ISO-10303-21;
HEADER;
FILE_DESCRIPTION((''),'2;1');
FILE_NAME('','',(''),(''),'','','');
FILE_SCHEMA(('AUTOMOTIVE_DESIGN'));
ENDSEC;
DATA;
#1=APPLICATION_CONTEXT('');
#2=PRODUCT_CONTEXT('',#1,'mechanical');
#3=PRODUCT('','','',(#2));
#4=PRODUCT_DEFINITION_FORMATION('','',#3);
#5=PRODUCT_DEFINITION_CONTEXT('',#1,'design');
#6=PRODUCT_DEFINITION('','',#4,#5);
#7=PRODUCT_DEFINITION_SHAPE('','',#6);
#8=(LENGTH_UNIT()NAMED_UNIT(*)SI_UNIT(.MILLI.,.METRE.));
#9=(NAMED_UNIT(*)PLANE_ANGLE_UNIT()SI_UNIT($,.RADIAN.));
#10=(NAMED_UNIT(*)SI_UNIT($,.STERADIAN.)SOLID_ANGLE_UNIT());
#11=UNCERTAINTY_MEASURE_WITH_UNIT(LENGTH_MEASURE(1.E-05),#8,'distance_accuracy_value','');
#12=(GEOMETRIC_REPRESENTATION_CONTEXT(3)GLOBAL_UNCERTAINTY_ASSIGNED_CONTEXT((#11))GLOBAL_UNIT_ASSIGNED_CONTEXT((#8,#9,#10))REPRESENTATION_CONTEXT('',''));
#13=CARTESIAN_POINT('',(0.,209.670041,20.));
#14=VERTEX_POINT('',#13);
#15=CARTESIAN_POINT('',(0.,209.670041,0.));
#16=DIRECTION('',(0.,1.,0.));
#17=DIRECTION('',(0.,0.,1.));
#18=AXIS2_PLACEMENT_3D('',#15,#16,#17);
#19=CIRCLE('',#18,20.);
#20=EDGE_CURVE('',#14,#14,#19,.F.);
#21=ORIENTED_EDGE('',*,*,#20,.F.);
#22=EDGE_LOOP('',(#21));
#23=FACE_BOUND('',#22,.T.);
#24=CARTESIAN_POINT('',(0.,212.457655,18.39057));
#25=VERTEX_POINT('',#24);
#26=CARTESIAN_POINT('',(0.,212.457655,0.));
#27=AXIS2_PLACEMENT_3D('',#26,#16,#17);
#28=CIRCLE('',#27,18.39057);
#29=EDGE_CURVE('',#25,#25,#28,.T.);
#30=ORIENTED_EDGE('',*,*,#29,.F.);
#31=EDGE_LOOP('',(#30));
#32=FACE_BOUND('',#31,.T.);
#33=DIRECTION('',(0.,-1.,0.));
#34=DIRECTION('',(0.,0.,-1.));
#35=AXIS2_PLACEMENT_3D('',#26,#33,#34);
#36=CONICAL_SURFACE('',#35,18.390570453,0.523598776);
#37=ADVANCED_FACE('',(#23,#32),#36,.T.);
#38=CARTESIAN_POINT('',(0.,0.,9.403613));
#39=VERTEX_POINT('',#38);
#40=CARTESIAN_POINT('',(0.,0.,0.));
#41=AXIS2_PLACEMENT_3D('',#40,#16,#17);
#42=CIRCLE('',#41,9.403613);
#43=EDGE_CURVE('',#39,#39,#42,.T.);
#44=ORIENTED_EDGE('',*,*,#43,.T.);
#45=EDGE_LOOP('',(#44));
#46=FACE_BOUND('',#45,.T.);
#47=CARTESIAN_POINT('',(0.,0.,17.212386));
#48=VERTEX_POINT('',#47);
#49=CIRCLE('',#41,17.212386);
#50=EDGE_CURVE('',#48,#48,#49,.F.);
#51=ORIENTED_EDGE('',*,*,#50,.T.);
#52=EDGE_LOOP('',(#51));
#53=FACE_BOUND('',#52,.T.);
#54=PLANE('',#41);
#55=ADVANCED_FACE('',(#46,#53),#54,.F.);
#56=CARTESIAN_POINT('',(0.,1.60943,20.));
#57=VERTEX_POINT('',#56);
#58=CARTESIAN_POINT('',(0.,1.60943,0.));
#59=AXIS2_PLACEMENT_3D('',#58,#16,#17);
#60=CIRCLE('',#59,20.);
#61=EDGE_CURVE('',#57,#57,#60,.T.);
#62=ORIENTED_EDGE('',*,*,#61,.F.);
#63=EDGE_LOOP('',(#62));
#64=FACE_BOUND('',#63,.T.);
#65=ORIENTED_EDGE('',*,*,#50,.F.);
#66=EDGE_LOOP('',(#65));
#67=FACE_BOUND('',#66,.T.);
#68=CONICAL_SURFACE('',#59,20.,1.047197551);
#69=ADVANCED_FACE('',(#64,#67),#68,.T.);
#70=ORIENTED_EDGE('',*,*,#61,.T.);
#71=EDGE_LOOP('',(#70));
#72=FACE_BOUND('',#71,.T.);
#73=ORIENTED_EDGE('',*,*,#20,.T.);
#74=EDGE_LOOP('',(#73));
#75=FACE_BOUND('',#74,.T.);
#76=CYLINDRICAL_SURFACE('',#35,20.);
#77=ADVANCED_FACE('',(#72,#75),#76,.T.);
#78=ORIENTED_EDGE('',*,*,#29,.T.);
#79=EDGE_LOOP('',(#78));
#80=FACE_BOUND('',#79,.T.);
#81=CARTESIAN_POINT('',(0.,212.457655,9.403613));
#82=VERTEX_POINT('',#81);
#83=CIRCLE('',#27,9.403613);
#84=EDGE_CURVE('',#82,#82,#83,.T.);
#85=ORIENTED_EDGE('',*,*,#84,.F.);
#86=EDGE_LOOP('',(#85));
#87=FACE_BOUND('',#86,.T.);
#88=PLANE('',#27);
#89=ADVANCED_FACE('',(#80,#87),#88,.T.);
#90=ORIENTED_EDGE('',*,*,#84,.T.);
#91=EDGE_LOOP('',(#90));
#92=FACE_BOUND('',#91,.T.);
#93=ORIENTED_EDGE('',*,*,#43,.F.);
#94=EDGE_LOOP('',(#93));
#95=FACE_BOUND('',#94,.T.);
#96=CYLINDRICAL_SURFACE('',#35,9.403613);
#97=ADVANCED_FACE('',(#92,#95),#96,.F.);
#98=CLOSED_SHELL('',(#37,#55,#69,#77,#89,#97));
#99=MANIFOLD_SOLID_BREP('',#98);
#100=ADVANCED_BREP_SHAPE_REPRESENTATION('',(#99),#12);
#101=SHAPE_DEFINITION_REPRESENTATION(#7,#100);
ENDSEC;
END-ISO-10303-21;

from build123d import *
from OCP.BRepFilletAPI import BRepFilletAPI_MakeChamfer

# Parameters (mm, degrees)
SKETCH1_R           = 20
BOSS_EXTRUDE1_DEPTH = 212.457654585
SKETCH2_R           = 9.403613151
CUT_EXTRUDE1_DEPTH  = 215.332113767
CHAMFER1_SIZE       = 2.787613746
CHAMFER1_SIZE2      = 1.609429547


with BuildPart() as part:
    # Sketch1 → Boss-Extrude1 (new body)
    with BuildSketch(Plane(origin=(0, 0, 0), x_dir=(1, 0, 0), z_dir=(0, 1, 0))):
        Circle(SKETCH1_R)
    extrude(amount=BOSS_EXTRUDE1_DEPTH)

    # Sketch2 → Cut-Extrude1 (cut, through all)
    with BuildSketch(Plane(origin=(0, 0, 0), x_dir=(1, 0, 0), z_dir=(0, 1, 0))):
        Circle(SKETCH2_R)
    extrude(amount=CUT_EXTRUDE1_DEPTH, mode=Mode.SUBTRACT)

    # Chamfer1: one chamfer whose edges measure the first distance from different faces: ONE call of the kernel's chamfer builder (chamfer() names one face for all edges)
    chamfer1_edges_1 = [part.edges().sort_by_distance(p)[0] for p in [
        (-20, 212.457654585, 0),
    ]]
    chamfer1_side_1 = [part.faces().sort_by_distance(p)[0] for p in [
        (-20, 106.228827293, 0),
    ]]
    chamfer1_edges_2 = [part.edges().sort_by_distance(p)[0] for p in [
        (-20, 0, 0),
    ]]
    chamfer1_side_2 = [part.faces().sort_by_distance(p)[0] for p in [
        (-19.434314575, 0, 0),
    ]]
    chamfer1 = BRepFilletAPI_MakeChamfer(part.part.solid().wrapped)
    for e in chamfer1_edges_1:
        chamfer1.Add(CHAMFER1_SIZE, CHAMFER1_SIZE2, e.wrapped, chamfer1_side_1[0].wrapped)  # the first distance lies on this face
    for e in chamfer1_edges_2:
        chamfer1.Add(CHAMFER1_SIZE, CHAMFER1_SIZE2, e.wrapped, chamfer1_side_2[0].wrapped)  # the first distance lies on this face
    add(Compound.cast(chamfer1.Shape()), mode=Mode.REPLACE)


solid = part.part
